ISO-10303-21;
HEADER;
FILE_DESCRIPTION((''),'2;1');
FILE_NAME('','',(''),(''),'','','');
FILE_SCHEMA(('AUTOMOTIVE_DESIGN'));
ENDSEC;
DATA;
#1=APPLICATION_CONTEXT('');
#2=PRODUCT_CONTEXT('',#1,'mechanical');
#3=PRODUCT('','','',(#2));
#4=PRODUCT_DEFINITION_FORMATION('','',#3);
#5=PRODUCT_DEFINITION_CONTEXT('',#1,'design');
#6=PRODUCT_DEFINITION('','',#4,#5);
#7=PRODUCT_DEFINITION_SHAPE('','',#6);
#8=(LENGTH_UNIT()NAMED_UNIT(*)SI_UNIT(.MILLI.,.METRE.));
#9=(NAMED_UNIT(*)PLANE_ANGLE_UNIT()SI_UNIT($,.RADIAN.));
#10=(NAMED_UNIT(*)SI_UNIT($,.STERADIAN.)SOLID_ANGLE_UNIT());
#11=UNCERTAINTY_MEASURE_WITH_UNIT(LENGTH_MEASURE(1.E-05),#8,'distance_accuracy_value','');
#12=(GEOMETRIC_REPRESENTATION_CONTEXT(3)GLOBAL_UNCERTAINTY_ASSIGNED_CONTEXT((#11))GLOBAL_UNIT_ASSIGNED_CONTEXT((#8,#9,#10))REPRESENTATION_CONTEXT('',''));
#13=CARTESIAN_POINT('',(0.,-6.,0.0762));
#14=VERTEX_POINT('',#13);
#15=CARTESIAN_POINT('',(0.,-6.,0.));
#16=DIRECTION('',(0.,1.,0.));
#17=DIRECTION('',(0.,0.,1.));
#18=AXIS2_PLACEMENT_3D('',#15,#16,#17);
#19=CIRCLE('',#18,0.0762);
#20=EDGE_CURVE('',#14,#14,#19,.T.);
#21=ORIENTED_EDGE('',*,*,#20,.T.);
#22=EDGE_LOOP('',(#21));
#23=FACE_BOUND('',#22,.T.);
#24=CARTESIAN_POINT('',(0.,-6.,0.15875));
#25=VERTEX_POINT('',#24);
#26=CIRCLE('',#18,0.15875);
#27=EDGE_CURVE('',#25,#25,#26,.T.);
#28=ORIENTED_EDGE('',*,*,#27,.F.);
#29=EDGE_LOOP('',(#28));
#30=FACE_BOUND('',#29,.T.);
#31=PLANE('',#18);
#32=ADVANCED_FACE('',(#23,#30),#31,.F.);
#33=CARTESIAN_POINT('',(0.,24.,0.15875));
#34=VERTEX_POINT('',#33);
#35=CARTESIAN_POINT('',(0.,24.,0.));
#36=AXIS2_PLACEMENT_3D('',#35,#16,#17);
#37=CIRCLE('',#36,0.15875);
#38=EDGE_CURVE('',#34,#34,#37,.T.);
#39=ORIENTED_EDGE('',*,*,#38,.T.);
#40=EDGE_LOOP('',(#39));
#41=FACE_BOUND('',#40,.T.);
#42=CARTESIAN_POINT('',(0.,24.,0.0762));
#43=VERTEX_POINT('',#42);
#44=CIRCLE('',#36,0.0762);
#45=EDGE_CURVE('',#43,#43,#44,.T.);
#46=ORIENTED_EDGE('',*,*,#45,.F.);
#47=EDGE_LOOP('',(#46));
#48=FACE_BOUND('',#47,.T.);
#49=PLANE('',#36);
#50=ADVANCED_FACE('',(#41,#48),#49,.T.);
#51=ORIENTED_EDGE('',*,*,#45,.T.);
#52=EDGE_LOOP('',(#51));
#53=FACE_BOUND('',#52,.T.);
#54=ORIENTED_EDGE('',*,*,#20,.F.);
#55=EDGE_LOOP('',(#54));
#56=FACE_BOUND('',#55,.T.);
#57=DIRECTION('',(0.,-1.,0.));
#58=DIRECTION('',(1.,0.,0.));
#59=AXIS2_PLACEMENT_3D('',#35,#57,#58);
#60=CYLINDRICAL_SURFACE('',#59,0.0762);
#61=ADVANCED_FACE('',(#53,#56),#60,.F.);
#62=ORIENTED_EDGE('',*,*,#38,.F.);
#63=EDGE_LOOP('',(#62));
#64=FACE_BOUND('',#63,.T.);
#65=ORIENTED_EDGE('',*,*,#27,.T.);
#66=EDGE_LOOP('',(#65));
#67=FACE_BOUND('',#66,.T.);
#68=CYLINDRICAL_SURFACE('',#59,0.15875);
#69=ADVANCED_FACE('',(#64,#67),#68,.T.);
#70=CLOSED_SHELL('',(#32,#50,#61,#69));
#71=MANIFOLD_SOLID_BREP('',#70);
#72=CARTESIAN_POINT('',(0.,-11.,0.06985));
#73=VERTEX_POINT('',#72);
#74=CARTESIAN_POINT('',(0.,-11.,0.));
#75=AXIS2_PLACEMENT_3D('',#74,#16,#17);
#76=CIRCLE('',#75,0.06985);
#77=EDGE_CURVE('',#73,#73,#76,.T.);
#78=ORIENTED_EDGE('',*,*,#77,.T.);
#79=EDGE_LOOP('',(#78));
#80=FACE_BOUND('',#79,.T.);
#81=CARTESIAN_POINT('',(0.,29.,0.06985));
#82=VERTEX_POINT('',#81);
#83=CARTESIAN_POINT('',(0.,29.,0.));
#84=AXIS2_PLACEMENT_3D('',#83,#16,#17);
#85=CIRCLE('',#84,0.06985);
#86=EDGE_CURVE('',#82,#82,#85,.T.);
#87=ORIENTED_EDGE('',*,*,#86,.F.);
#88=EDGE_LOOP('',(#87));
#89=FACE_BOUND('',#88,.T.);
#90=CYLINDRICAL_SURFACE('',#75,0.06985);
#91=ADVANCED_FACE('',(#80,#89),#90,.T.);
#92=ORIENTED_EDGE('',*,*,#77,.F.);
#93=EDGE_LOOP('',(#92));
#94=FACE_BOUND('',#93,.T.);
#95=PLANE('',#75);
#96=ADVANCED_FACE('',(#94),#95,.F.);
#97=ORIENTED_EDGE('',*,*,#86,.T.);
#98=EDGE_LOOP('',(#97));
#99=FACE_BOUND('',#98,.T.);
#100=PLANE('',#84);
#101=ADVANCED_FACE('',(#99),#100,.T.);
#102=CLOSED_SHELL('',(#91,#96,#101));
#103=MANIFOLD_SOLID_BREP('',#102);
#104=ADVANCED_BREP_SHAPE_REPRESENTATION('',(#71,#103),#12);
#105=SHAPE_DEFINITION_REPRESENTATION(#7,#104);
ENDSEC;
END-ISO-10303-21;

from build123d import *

# Parameters (mm, degrees)
SWEEP1_START        = -6
SWEEP1_OUTLINE_R    = 0.15875
SWEEP1_OUTLINE_R_2  = 0.0762
SWEEP1_DEPTH        = 30
SKETCH3_R           = 0.06985
BOSS_EXTRUDE1_DEPTH = 40


# Read off the part's stored shape, not the designer's step: Sweep1
with BuildPart() as part:
    # Sweep1 outline → Sweep1 (new body)
    with BuildSketch(Plane(origin=(0, 0, 0), x_dir=(1, 0, 0), z_dir=(0, 1, 0)).offset(SWEEP1_START)):
        Circle(SWEEP1_OUTLINE_R)
        Circle(SWEEP1_OUTLINE_R_2, mode=Mode.SUBTRACT)
    extrude(amount=SWEEP1_DEPTH)


with BuildPart() as body_2:
    # Sketch3 → Boss-Extrude1 (new body)
    with BuildSketch(Plane(origin=(0, 29, 0), x_dir=(1, 0, 0), z_dir=(0, 1, 0))):
        with Locations(Location((0, 0, 0), (0, 0, 270))):
            Circle(SKETCH3_R)
    extrude(amount=-BOSS_EXTRUDE1_DEPTH)


solid = Compound([part.part, body_2.part])
